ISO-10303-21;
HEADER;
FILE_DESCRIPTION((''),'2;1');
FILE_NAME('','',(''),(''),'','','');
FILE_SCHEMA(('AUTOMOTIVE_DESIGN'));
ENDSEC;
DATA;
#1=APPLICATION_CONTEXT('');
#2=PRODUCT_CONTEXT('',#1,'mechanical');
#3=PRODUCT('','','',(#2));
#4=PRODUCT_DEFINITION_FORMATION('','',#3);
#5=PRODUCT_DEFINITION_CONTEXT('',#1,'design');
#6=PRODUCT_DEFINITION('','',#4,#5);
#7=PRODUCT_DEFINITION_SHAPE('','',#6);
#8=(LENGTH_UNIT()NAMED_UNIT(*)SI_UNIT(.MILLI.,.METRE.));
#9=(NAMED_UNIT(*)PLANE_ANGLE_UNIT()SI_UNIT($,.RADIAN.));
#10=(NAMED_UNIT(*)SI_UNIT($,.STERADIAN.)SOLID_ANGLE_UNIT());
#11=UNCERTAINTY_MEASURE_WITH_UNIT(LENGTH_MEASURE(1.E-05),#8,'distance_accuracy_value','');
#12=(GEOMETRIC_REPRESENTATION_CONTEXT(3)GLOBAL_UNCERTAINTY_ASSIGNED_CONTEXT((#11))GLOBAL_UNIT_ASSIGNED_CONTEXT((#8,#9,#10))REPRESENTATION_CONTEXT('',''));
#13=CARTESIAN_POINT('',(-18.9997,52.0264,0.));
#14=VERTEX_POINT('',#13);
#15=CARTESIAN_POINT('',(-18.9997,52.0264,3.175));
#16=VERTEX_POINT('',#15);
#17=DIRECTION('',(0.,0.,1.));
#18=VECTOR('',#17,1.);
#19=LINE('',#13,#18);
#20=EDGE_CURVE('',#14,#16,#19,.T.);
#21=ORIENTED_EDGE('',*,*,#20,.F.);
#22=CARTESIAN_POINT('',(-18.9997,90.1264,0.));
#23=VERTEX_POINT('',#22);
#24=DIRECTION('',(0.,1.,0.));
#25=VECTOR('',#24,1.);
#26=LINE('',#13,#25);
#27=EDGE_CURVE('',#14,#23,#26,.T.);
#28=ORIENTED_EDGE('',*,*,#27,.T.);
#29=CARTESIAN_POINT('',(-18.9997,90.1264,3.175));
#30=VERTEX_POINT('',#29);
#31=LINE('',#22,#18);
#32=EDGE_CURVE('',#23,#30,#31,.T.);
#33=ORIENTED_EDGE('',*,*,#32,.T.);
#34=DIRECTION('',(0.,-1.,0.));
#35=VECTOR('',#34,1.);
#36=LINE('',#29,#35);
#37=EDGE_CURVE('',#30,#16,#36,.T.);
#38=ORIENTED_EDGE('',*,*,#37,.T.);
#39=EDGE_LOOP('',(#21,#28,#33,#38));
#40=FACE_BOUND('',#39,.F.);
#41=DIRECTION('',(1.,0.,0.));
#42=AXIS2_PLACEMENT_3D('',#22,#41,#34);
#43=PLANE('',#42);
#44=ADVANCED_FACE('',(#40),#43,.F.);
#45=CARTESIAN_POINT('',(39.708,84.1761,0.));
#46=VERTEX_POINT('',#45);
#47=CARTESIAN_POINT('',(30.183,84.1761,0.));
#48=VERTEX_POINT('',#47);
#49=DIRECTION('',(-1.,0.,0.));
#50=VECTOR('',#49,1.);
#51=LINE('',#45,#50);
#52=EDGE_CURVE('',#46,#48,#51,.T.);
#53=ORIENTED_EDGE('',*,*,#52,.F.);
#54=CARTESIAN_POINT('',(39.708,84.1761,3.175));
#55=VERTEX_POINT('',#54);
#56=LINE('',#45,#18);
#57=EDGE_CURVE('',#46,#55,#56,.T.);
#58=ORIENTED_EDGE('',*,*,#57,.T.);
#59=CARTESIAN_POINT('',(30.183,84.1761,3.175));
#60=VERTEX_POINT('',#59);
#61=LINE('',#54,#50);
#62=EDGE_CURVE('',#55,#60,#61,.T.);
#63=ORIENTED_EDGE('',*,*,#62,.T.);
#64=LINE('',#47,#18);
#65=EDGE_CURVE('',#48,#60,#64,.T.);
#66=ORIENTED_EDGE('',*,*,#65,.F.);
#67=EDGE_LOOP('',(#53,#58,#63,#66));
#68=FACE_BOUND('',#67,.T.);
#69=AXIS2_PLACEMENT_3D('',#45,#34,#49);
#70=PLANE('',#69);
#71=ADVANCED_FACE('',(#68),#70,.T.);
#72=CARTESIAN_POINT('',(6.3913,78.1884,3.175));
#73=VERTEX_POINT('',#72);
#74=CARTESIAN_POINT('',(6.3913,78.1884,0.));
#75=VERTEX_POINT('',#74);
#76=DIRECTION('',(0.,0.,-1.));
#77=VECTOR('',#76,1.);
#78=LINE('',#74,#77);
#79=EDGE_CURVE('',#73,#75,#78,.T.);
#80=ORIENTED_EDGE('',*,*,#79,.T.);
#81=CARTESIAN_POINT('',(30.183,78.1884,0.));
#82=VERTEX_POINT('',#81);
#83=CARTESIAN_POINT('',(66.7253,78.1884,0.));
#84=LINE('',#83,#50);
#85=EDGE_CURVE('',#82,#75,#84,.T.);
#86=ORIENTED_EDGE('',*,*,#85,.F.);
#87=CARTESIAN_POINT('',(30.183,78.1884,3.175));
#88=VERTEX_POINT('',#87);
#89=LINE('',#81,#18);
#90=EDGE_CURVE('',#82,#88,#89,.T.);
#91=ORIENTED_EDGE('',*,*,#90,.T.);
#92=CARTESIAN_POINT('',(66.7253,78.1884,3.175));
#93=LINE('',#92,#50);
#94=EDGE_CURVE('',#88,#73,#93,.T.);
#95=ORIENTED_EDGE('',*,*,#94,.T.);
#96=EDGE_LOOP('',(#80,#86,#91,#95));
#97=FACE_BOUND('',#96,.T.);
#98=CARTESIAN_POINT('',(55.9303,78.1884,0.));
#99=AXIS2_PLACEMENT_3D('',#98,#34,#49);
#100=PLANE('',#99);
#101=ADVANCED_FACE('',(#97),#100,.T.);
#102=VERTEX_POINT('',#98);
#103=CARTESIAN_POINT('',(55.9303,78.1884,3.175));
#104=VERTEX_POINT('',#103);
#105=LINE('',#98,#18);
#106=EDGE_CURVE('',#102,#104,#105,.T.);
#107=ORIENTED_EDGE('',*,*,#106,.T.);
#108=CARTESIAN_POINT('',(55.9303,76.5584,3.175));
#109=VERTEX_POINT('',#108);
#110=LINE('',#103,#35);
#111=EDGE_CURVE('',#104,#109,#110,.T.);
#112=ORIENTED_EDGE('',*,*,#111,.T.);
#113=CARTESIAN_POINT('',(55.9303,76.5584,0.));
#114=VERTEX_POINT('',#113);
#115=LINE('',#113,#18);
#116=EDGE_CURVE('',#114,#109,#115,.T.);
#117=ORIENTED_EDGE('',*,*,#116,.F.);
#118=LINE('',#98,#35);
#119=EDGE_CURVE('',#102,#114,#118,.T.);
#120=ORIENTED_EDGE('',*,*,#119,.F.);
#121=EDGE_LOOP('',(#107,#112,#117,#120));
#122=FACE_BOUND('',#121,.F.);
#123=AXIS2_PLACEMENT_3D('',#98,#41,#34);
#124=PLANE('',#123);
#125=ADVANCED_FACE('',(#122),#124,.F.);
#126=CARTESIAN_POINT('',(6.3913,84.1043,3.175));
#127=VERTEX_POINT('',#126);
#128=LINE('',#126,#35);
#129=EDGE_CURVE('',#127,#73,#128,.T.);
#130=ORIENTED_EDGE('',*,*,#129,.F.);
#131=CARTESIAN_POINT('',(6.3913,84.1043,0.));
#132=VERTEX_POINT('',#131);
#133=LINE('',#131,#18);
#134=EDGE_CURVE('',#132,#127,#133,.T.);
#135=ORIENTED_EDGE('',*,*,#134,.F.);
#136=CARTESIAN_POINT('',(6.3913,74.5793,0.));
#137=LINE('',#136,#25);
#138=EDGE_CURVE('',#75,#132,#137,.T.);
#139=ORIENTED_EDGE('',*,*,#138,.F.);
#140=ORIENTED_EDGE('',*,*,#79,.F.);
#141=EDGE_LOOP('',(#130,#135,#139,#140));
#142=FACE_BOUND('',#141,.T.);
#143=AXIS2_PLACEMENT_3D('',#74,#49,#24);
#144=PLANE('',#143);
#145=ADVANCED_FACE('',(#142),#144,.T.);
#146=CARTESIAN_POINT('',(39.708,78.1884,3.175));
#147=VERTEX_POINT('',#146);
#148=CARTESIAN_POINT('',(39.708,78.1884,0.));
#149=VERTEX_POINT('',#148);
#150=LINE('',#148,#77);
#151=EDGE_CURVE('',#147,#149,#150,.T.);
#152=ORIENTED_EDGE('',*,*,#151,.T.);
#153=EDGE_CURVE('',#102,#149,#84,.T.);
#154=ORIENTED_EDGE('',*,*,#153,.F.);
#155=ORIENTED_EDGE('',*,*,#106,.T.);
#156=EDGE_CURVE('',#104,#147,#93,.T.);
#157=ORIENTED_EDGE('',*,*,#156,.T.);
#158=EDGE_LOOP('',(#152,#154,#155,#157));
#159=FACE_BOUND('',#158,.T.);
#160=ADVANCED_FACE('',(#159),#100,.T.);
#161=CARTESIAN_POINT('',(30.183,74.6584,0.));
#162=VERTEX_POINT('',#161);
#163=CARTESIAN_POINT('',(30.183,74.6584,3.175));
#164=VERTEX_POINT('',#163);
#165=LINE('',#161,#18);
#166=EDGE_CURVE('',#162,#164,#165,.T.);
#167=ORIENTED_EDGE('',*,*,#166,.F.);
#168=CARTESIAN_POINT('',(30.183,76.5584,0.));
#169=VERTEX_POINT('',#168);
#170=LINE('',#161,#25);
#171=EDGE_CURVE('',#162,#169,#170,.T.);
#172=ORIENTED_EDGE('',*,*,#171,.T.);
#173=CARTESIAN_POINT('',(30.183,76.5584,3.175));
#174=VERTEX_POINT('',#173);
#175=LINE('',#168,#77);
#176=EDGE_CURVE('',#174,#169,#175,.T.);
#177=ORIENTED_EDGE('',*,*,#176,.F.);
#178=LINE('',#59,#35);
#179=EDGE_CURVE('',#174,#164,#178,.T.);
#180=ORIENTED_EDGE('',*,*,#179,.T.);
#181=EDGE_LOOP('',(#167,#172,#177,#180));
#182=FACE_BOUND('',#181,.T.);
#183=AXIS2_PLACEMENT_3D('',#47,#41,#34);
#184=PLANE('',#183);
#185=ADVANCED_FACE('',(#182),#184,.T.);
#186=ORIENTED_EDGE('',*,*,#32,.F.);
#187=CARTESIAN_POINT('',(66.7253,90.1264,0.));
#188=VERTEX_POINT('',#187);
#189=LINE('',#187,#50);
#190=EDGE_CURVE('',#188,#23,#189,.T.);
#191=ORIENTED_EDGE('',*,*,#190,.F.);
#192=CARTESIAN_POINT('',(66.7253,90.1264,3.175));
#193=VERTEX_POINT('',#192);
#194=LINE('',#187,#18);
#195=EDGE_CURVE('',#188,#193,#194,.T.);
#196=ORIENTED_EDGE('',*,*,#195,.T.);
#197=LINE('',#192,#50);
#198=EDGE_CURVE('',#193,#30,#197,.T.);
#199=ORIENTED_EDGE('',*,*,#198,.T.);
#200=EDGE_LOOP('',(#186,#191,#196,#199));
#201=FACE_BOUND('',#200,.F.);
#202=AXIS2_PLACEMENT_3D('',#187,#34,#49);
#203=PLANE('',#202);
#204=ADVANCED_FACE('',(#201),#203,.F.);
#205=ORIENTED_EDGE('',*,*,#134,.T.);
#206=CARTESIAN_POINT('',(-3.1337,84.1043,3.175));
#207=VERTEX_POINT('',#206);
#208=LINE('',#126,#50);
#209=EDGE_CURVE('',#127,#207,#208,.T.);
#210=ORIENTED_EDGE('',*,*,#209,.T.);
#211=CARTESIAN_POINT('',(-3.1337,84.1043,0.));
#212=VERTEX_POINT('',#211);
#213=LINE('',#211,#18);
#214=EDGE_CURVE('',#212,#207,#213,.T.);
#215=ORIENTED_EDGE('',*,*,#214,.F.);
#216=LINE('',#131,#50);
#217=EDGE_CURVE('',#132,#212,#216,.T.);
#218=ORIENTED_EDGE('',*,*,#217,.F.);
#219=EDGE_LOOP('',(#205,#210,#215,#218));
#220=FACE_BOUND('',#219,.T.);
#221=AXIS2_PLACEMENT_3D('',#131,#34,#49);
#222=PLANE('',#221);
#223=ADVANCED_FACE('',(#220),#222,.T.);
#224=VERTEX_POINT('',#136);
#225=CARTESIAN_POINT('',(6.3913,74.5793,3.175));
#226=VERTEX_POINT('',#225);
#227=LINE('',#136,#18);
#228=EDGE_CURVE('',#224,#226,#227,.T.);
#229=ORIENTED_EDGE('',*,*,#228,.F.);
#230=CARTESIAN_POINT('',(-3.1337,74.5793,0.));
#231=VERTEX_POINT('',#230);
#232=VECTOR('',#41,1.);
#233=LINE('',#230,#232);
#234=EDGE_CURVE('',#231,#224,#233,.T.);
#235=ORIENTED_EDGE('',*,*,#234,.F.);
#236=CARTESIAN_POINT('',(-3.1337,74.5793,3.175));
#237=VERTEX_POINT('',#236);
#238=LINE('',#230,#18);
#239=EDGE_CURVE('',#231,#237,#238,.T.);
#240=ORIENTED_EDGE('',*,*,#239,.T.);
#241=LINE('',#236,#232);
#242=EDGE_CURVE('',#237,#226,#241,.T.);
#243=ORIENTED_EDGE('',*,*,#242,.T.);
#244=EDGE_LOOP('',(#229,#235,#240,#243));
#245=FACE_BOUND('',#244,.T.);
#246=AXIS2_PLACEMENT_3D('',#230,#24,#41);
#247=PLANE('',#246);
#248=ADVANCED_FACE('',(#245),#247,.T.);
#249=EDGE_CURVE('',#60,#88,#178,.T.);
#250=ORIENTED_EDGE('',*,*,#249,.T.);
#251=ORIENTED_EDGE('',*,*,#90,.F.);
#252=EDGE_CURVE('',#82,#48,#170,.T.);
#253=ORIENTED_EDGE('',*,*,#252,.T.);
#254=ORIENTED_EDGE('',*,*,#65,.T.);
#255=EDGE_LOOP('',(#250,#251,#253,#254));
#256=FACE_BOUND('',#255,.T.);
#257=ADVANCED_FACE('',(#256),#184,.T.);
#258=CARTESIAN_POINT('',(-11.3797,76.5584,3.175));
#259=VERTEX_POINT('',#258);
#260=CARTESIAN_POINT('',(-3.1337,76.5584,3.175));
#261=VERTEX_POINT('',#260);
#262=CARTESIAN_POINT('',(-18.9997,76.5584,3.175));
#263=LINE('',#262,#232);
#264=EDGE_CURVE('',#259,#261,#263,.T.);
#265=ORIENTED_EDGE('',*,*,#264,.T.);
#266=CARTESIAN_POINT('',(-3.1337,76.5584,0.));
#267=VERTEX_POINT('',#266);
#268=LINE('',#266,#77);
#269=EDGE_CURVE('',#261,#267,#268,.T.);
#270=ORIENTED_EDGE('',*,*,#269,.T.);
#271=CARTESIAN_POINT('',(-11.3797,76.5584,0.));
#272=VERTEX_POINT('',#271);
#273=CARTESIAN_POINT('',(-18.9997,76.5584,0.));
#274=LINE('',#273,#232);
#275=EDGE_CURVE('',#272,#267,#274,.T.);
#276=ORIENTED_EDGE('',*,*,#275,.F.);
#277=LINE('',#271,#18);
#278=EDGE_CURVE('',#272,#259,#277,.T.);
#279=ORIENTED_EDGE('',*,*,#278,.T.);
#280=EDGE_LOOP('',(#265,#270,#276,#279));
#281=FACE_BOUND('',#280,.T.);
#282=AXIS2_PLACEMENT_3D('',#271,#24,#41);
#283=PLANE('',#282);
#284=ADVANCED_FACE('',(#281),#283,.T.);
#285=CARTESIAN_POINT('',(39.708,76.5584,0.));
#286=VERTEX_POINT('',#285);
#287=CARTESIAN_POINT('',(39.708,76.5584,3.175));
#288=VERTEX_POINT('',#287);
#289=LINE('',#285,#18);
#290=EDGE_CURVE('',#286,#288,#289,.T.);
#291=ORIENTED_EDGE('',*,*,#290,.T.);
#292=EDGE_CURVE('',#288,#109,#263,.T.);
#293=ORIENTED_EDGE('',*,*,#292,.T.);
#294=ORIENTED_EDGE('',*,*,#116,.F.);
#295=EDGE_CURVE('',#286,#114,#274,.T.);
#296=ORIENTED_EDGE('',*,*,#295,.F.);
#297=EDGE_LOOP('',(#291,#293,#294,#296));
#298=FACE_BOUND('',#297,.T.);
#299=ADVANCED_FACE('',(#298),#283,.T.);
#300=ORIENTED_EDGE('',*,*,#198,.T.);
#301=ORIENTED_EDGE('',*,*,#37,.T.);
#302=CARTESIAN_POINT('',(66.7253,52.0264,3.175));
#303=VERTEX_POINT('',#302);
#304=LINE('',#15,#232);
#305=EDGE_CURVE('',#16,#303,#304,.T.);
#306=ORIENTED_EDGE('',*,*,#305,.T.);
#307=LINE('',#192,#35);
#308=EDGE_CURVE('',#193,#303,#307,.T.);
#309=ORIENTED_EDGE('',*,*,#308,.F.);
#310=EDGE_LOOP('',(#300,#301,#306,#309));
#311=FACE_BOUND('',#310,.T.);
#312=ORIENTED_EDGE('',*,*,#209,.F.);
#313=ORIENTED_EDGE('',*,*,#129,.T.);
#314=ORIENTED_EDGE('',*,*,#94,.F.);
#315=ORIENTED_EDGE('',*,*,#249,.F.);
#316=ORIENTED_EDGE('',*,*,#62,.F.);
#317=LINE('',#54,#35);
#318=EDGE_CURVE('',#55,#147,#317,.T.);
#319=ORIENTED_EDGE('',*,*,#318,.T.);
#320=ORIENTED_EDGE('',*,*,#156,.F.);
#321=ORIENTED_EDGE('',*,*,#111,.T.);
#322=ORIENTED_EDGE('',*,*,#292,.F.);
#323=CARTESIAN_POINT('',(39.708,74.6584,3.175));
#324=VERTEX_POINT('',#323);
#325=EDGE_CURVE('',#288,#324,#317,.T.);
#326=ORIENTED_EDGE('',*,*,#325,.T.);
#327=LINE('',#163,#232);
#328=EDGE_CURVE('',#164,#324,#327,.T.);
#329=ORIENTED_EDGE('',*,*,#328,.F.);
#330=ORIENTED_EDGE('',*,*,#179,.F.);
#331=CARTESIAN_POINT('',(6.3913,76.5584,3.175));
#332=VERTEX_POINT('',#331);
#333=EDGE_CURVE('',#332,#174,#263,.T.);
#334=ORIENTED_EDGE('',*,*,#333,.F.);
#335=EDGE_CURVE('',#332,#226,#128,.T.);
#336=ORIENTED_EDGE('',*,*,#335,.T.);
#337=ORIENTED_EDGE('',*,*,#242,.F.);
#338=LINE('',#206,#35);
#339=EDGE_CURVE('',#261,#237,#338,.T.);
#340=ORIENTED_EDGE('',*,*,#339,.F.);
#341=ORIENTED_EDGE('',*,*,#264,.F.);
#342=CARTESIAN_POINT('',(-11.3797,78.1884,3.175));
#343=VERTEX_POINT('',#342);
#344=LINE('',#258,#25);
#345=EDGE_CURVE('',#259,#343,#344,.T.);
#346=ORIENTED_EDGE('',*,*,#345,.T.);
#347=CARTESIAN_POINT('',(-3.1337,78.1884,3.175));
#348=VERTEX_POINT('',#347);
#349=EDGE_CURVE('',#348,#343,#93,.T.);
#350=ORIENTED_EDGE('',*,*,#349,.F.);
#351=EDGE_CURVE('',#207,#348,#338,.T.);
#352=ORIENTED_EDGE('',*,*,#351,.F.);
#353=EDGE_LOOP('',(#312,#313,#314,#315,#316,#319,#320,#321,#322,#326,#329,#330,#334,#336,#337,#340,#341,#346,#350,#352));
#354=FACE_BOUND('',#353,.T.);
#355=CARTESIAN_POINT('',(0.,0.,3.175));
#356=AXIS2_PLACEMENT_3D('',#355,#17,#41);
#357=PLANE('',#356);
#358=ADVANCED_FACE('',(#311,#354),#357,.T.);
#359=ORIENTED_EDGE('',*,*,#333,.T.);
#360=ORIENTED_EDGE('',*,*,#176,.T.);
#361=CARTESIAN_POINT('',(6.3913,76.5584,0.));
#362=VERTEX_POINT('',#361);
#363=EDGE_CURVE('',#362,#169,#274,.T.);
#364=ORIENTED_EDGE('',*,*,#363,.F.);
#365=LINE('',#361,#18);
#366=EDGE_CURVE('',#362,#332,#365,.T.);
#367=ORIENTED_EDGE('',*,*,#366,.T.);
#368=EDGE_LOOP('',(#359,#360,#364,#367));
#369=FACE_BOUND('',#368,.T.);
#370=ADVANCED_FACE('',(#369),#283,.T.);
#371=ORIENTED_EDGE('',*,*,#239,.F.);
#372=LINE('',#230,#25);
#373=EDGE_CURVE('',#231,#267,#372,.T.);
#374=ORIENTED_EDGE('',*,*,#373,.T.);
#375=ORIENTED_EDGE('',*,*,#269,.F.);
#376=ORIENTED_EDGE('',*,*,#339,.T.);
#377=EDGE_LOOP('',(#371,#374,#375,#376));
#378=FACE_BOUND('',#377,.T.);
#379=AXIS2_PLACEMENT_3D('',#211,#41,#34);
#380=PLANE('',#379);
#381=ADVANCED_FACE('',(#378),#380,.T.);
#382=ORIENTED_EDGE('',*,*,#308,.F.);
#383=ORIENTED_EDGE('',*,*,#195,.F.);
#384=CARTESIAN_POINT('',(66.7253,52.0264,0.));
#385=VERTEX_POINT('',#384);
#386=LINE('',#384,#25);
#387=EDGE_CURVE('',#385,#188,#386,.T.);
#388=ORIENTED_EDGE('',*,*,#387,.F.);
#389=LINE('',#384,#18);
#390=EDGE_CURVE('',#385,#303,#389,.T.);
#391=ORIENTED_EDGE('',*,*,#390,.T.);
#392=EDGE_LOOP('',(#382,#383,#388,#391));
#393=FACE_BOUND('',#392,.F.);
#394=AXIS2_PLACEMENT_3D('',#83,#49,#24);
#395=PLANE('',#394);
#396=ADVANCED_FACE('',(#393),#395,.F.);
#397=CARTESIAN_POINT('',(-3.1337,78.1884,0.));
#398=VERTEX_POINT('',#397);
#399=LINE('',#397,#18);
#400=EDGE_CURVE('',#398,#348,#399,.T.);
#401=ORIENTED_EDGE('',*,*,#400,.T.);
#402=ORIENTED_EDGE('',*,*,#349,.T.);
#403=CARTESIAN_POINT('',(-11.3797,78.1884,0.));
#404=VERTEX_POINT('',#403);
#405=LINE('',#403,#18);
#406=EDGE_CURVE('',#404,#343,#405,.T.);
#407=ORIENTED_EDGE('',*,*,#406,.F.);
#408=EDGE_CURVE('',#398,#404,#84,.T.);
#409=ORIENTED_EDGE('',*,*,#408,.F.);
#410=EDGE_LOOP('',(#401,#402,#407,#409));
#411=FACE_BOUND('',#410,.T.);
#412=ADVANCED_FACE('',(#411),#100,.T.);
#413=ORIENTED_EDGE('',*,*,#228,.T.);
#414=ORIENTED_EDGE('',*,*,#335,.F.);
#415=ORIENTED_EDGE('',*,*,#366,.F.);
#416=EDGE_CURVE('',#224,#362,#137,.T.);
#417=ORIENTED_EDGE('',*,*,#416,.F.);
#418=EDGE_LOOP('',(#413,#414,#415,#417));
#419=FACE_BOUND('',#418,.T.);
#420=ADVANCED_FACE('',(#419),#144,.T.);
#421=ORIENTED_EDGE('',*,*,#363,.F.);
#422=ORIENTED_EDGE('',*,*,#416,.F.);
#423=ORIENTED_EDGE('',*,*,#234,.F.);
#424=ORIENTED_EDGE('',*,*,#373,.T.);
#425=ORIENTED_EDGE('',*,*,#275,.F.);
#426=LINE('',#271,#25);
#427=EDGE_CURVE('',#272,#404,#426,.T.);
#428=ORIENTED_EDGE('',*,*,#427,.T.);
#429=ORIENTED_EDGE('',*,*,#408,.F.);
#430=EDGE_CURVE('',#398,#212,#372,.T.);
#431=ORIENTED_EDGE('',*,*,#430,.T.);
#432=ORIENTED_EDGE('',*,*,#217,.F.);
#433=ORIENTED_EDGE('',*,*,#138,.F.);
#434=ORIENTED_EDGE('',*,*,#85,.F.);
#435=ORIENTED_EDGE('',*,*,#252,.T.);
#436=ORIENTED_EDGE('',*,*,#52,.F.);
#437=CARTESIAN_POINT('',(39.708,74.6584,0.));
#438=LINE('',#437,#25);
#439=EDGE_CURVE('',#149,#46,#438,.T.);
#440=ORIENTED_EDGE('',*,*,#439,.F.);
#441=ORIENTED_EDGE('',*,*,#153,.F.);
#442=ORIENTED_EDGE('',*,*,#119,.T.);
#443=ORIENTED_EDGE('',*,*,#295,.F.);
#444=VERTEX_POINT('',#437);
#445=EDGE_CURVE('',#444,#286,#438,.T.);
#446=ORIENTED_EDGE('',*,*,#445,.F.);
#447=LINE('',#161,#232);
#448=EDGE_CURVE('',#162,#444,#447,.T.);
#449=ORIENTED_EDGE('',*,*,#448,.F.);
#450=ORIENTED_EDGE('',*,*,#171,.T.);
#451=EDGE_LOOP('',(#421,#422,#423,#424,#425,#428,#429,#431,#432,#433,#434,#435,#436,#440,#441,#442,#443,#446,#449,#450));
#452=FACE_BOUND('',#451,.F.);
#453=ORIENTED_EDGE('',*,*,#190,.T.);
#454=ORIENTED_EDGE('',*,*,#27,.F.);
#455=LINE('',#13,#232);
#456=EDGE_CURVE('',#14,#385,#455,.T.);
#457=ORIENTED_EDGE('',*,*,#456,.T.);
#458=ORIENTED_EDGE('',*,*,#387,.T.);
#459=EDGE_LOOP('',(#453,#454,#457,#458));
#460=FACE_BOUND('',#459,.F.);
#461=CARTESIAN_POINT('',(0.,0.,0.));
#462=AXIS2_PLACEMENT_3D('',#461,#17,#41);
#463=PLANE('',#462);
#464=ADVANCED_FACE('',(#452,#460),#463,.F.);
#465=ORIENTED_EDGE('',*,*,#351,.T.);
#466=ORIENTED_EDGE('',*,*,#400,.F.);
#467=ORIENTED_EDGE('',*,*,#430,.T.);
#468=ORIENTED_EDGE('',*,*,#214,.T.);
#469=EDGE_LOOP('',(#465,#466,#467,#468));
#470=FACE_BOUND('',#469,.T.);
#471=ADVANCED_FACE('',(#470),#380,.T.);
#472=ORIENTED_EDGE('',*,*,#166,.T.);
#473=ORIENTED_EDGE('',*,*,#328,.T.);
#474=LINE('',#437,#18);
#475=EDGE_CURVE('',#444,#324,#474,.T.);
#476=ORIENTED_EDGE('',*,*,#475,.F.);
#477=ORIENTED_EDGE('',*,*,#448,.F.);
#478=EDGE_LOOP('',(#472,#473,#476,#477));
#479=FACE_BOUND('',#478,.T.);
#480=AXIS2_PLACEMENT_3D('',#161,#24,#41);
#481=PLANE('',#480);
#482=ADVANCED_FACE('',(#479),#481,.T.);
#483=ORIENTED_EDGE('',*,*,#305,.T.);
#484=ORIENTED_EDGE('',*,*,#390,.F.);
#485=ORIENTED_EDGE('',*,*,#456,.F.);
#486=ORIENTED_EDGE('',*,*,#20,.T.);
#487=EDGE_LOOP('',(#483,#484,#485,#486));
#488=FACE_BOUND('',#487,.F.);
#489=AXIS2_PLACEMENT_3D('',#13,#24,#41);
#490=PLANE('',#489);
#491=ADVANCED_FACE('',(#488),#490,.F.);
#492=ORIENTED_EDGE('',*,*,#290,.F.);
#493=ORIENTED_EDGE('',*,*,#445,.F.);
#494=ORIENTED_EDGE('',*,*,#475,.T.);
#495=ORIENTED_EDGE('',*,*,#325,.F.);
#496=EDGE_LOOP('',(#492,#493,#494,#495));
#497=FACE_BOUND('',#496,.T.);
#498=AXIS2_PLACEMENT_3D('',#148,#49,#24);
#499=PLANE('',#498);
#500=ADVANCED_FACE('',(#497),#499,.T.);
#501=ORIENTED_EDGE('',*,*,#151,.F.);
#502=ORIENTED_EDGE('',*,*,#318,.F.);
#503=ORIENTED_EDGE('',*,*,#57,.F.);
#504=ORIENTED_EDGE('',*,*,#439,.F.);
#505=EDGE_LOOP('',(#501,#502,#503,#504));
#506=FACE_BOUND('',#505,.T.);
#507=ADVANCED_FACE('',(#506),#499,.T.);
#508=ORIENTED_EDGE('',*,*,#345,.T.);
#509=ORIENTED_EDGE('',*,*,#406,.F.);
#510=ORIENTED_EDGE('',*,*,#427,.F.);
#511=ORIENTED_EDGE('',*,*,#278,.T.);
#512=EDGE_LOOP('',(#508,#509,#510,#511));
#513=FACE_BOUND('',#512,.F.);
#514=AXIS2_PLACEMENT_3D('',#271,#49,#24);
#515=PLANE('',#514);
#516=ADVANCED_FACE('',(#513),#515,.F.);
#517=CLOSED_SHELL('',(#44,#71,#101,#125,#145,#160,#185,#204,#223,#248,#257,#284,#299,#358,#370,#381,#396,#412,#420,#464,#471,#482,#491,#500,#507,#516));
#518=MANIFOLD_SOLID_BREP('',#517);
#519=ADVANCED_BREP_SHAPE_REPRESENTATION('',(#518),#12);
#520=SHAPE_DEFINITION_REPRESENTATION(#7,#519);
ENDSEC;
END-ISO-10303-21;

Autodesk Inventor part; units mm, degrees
ref_plane "YZ Plane" through (0, 0, 0) normal (1, 0, 0) x (0, 1, 0)
ref_plane "XZ Plane" through (0, 0, 0) normal (0, 1, 0) x (-1, 0, 0)
ref_plane "XY Plane" through (0, 0, 0) normal (0, 0, 1) x (1, 0, 0)
sketch "Sketch1" plane through (0, 0, 0) normal (0, 0, 1) x (1, 0, 0)
  line L0 (66.7253, 90.1264) -> (-18.9997, 90.1264)
  line L1 (-18.9997, 90.1264) -> (-18.9997, 52.0264)
  line L2 (-18.9997, 52.0264) -> (66.7253, 52.0264)
  line L3 (66.7253, 52.0264) -> (66.7253, 90.1264)
  line L4 (66.7253, 78.1884) -> (-18.9997, 78.1884)
  line L5 (-18.9997, 78.1884) -> (-18.9997, 76.5584)
  line L6 (-18.9997, 76.5584) -> (66.7253, 76.5584)
  line L7 (66.7253, 76.5584) -> (66.7253, 78.1884)
  line L8 (55.9303, 78.1884) -> (55.9303, 76.5584)
  line L9 (-11.3797, 76.5584) -> (-11.3797, 78.1884)
  point P0 (0, 0)
  dimension "d0" = 38.1
  dimension "d1" = 85.725
  dimension "d2" = 1.63
  dimension "d3" = 11.938
  dimension "d6" = 67.31
  dimension "d7" = 7.62
extrude "Extrusion1" add sketch "Sketch1" along normal blind 3.175 contours L3 L4 L1 L0 | L3 L6 L8 L4 | L4 L9 L6 L1 | L3 L2 L1 L6
sketch "Sketch2" plane through (0, 0, 0) normal (0, 0, -1) x (-1, 0, 0)
  line L0 (-55.9303, 78.1884) -> (11.3797, 78.1884) projected
  line L1 (-6.3913, 84.1043) -> (3.1337, 84.1043)
  line L2 (3.1337, 84.1043) -> (3.1337, 74.5793)
  line L3 (3.1337, 74.5793) -> (-6.3913, 74.5793)
  line L4 (-6.3913, 74.5793) -> (-6.3913, 84.1043)
  line L5 (-39.708, 84.1761) -> (-30.183, 84.1761)
  line L6 (-30.183, 84.1761) -> (-30.183, 74.6584)
  line L7 (-30.183, 74.6584) -> (-39.708, 74.6584)
  line L8 (-39.708, 74.6584) -> (-39.708, 84.1761)
  line L9 (18.9997, 52.0264) -> (-66.7253, 52.0264) projected
  line L10 (-50.8503, 52.0264) -> (-12.7503, 52.0264)
  line L11 (-66.7253, 90.1264) -> (18.9997, 90.1264) projected
  line L12 (-28.6253, 90.1264) -> (-15.9253, 90.1264)
  point P0 (0, 0)
  dimension "d8" = 9.525
  dimension "d9" = 9.5177
  dimension "d10" = 9.525
  dimension "d11" = 9.525
  dimension "d13" = 5.9159
extrude "Extrusion2" cut sketch "Sketch2" against normal blind 3.175
properties part number "FrontBulkhead"
